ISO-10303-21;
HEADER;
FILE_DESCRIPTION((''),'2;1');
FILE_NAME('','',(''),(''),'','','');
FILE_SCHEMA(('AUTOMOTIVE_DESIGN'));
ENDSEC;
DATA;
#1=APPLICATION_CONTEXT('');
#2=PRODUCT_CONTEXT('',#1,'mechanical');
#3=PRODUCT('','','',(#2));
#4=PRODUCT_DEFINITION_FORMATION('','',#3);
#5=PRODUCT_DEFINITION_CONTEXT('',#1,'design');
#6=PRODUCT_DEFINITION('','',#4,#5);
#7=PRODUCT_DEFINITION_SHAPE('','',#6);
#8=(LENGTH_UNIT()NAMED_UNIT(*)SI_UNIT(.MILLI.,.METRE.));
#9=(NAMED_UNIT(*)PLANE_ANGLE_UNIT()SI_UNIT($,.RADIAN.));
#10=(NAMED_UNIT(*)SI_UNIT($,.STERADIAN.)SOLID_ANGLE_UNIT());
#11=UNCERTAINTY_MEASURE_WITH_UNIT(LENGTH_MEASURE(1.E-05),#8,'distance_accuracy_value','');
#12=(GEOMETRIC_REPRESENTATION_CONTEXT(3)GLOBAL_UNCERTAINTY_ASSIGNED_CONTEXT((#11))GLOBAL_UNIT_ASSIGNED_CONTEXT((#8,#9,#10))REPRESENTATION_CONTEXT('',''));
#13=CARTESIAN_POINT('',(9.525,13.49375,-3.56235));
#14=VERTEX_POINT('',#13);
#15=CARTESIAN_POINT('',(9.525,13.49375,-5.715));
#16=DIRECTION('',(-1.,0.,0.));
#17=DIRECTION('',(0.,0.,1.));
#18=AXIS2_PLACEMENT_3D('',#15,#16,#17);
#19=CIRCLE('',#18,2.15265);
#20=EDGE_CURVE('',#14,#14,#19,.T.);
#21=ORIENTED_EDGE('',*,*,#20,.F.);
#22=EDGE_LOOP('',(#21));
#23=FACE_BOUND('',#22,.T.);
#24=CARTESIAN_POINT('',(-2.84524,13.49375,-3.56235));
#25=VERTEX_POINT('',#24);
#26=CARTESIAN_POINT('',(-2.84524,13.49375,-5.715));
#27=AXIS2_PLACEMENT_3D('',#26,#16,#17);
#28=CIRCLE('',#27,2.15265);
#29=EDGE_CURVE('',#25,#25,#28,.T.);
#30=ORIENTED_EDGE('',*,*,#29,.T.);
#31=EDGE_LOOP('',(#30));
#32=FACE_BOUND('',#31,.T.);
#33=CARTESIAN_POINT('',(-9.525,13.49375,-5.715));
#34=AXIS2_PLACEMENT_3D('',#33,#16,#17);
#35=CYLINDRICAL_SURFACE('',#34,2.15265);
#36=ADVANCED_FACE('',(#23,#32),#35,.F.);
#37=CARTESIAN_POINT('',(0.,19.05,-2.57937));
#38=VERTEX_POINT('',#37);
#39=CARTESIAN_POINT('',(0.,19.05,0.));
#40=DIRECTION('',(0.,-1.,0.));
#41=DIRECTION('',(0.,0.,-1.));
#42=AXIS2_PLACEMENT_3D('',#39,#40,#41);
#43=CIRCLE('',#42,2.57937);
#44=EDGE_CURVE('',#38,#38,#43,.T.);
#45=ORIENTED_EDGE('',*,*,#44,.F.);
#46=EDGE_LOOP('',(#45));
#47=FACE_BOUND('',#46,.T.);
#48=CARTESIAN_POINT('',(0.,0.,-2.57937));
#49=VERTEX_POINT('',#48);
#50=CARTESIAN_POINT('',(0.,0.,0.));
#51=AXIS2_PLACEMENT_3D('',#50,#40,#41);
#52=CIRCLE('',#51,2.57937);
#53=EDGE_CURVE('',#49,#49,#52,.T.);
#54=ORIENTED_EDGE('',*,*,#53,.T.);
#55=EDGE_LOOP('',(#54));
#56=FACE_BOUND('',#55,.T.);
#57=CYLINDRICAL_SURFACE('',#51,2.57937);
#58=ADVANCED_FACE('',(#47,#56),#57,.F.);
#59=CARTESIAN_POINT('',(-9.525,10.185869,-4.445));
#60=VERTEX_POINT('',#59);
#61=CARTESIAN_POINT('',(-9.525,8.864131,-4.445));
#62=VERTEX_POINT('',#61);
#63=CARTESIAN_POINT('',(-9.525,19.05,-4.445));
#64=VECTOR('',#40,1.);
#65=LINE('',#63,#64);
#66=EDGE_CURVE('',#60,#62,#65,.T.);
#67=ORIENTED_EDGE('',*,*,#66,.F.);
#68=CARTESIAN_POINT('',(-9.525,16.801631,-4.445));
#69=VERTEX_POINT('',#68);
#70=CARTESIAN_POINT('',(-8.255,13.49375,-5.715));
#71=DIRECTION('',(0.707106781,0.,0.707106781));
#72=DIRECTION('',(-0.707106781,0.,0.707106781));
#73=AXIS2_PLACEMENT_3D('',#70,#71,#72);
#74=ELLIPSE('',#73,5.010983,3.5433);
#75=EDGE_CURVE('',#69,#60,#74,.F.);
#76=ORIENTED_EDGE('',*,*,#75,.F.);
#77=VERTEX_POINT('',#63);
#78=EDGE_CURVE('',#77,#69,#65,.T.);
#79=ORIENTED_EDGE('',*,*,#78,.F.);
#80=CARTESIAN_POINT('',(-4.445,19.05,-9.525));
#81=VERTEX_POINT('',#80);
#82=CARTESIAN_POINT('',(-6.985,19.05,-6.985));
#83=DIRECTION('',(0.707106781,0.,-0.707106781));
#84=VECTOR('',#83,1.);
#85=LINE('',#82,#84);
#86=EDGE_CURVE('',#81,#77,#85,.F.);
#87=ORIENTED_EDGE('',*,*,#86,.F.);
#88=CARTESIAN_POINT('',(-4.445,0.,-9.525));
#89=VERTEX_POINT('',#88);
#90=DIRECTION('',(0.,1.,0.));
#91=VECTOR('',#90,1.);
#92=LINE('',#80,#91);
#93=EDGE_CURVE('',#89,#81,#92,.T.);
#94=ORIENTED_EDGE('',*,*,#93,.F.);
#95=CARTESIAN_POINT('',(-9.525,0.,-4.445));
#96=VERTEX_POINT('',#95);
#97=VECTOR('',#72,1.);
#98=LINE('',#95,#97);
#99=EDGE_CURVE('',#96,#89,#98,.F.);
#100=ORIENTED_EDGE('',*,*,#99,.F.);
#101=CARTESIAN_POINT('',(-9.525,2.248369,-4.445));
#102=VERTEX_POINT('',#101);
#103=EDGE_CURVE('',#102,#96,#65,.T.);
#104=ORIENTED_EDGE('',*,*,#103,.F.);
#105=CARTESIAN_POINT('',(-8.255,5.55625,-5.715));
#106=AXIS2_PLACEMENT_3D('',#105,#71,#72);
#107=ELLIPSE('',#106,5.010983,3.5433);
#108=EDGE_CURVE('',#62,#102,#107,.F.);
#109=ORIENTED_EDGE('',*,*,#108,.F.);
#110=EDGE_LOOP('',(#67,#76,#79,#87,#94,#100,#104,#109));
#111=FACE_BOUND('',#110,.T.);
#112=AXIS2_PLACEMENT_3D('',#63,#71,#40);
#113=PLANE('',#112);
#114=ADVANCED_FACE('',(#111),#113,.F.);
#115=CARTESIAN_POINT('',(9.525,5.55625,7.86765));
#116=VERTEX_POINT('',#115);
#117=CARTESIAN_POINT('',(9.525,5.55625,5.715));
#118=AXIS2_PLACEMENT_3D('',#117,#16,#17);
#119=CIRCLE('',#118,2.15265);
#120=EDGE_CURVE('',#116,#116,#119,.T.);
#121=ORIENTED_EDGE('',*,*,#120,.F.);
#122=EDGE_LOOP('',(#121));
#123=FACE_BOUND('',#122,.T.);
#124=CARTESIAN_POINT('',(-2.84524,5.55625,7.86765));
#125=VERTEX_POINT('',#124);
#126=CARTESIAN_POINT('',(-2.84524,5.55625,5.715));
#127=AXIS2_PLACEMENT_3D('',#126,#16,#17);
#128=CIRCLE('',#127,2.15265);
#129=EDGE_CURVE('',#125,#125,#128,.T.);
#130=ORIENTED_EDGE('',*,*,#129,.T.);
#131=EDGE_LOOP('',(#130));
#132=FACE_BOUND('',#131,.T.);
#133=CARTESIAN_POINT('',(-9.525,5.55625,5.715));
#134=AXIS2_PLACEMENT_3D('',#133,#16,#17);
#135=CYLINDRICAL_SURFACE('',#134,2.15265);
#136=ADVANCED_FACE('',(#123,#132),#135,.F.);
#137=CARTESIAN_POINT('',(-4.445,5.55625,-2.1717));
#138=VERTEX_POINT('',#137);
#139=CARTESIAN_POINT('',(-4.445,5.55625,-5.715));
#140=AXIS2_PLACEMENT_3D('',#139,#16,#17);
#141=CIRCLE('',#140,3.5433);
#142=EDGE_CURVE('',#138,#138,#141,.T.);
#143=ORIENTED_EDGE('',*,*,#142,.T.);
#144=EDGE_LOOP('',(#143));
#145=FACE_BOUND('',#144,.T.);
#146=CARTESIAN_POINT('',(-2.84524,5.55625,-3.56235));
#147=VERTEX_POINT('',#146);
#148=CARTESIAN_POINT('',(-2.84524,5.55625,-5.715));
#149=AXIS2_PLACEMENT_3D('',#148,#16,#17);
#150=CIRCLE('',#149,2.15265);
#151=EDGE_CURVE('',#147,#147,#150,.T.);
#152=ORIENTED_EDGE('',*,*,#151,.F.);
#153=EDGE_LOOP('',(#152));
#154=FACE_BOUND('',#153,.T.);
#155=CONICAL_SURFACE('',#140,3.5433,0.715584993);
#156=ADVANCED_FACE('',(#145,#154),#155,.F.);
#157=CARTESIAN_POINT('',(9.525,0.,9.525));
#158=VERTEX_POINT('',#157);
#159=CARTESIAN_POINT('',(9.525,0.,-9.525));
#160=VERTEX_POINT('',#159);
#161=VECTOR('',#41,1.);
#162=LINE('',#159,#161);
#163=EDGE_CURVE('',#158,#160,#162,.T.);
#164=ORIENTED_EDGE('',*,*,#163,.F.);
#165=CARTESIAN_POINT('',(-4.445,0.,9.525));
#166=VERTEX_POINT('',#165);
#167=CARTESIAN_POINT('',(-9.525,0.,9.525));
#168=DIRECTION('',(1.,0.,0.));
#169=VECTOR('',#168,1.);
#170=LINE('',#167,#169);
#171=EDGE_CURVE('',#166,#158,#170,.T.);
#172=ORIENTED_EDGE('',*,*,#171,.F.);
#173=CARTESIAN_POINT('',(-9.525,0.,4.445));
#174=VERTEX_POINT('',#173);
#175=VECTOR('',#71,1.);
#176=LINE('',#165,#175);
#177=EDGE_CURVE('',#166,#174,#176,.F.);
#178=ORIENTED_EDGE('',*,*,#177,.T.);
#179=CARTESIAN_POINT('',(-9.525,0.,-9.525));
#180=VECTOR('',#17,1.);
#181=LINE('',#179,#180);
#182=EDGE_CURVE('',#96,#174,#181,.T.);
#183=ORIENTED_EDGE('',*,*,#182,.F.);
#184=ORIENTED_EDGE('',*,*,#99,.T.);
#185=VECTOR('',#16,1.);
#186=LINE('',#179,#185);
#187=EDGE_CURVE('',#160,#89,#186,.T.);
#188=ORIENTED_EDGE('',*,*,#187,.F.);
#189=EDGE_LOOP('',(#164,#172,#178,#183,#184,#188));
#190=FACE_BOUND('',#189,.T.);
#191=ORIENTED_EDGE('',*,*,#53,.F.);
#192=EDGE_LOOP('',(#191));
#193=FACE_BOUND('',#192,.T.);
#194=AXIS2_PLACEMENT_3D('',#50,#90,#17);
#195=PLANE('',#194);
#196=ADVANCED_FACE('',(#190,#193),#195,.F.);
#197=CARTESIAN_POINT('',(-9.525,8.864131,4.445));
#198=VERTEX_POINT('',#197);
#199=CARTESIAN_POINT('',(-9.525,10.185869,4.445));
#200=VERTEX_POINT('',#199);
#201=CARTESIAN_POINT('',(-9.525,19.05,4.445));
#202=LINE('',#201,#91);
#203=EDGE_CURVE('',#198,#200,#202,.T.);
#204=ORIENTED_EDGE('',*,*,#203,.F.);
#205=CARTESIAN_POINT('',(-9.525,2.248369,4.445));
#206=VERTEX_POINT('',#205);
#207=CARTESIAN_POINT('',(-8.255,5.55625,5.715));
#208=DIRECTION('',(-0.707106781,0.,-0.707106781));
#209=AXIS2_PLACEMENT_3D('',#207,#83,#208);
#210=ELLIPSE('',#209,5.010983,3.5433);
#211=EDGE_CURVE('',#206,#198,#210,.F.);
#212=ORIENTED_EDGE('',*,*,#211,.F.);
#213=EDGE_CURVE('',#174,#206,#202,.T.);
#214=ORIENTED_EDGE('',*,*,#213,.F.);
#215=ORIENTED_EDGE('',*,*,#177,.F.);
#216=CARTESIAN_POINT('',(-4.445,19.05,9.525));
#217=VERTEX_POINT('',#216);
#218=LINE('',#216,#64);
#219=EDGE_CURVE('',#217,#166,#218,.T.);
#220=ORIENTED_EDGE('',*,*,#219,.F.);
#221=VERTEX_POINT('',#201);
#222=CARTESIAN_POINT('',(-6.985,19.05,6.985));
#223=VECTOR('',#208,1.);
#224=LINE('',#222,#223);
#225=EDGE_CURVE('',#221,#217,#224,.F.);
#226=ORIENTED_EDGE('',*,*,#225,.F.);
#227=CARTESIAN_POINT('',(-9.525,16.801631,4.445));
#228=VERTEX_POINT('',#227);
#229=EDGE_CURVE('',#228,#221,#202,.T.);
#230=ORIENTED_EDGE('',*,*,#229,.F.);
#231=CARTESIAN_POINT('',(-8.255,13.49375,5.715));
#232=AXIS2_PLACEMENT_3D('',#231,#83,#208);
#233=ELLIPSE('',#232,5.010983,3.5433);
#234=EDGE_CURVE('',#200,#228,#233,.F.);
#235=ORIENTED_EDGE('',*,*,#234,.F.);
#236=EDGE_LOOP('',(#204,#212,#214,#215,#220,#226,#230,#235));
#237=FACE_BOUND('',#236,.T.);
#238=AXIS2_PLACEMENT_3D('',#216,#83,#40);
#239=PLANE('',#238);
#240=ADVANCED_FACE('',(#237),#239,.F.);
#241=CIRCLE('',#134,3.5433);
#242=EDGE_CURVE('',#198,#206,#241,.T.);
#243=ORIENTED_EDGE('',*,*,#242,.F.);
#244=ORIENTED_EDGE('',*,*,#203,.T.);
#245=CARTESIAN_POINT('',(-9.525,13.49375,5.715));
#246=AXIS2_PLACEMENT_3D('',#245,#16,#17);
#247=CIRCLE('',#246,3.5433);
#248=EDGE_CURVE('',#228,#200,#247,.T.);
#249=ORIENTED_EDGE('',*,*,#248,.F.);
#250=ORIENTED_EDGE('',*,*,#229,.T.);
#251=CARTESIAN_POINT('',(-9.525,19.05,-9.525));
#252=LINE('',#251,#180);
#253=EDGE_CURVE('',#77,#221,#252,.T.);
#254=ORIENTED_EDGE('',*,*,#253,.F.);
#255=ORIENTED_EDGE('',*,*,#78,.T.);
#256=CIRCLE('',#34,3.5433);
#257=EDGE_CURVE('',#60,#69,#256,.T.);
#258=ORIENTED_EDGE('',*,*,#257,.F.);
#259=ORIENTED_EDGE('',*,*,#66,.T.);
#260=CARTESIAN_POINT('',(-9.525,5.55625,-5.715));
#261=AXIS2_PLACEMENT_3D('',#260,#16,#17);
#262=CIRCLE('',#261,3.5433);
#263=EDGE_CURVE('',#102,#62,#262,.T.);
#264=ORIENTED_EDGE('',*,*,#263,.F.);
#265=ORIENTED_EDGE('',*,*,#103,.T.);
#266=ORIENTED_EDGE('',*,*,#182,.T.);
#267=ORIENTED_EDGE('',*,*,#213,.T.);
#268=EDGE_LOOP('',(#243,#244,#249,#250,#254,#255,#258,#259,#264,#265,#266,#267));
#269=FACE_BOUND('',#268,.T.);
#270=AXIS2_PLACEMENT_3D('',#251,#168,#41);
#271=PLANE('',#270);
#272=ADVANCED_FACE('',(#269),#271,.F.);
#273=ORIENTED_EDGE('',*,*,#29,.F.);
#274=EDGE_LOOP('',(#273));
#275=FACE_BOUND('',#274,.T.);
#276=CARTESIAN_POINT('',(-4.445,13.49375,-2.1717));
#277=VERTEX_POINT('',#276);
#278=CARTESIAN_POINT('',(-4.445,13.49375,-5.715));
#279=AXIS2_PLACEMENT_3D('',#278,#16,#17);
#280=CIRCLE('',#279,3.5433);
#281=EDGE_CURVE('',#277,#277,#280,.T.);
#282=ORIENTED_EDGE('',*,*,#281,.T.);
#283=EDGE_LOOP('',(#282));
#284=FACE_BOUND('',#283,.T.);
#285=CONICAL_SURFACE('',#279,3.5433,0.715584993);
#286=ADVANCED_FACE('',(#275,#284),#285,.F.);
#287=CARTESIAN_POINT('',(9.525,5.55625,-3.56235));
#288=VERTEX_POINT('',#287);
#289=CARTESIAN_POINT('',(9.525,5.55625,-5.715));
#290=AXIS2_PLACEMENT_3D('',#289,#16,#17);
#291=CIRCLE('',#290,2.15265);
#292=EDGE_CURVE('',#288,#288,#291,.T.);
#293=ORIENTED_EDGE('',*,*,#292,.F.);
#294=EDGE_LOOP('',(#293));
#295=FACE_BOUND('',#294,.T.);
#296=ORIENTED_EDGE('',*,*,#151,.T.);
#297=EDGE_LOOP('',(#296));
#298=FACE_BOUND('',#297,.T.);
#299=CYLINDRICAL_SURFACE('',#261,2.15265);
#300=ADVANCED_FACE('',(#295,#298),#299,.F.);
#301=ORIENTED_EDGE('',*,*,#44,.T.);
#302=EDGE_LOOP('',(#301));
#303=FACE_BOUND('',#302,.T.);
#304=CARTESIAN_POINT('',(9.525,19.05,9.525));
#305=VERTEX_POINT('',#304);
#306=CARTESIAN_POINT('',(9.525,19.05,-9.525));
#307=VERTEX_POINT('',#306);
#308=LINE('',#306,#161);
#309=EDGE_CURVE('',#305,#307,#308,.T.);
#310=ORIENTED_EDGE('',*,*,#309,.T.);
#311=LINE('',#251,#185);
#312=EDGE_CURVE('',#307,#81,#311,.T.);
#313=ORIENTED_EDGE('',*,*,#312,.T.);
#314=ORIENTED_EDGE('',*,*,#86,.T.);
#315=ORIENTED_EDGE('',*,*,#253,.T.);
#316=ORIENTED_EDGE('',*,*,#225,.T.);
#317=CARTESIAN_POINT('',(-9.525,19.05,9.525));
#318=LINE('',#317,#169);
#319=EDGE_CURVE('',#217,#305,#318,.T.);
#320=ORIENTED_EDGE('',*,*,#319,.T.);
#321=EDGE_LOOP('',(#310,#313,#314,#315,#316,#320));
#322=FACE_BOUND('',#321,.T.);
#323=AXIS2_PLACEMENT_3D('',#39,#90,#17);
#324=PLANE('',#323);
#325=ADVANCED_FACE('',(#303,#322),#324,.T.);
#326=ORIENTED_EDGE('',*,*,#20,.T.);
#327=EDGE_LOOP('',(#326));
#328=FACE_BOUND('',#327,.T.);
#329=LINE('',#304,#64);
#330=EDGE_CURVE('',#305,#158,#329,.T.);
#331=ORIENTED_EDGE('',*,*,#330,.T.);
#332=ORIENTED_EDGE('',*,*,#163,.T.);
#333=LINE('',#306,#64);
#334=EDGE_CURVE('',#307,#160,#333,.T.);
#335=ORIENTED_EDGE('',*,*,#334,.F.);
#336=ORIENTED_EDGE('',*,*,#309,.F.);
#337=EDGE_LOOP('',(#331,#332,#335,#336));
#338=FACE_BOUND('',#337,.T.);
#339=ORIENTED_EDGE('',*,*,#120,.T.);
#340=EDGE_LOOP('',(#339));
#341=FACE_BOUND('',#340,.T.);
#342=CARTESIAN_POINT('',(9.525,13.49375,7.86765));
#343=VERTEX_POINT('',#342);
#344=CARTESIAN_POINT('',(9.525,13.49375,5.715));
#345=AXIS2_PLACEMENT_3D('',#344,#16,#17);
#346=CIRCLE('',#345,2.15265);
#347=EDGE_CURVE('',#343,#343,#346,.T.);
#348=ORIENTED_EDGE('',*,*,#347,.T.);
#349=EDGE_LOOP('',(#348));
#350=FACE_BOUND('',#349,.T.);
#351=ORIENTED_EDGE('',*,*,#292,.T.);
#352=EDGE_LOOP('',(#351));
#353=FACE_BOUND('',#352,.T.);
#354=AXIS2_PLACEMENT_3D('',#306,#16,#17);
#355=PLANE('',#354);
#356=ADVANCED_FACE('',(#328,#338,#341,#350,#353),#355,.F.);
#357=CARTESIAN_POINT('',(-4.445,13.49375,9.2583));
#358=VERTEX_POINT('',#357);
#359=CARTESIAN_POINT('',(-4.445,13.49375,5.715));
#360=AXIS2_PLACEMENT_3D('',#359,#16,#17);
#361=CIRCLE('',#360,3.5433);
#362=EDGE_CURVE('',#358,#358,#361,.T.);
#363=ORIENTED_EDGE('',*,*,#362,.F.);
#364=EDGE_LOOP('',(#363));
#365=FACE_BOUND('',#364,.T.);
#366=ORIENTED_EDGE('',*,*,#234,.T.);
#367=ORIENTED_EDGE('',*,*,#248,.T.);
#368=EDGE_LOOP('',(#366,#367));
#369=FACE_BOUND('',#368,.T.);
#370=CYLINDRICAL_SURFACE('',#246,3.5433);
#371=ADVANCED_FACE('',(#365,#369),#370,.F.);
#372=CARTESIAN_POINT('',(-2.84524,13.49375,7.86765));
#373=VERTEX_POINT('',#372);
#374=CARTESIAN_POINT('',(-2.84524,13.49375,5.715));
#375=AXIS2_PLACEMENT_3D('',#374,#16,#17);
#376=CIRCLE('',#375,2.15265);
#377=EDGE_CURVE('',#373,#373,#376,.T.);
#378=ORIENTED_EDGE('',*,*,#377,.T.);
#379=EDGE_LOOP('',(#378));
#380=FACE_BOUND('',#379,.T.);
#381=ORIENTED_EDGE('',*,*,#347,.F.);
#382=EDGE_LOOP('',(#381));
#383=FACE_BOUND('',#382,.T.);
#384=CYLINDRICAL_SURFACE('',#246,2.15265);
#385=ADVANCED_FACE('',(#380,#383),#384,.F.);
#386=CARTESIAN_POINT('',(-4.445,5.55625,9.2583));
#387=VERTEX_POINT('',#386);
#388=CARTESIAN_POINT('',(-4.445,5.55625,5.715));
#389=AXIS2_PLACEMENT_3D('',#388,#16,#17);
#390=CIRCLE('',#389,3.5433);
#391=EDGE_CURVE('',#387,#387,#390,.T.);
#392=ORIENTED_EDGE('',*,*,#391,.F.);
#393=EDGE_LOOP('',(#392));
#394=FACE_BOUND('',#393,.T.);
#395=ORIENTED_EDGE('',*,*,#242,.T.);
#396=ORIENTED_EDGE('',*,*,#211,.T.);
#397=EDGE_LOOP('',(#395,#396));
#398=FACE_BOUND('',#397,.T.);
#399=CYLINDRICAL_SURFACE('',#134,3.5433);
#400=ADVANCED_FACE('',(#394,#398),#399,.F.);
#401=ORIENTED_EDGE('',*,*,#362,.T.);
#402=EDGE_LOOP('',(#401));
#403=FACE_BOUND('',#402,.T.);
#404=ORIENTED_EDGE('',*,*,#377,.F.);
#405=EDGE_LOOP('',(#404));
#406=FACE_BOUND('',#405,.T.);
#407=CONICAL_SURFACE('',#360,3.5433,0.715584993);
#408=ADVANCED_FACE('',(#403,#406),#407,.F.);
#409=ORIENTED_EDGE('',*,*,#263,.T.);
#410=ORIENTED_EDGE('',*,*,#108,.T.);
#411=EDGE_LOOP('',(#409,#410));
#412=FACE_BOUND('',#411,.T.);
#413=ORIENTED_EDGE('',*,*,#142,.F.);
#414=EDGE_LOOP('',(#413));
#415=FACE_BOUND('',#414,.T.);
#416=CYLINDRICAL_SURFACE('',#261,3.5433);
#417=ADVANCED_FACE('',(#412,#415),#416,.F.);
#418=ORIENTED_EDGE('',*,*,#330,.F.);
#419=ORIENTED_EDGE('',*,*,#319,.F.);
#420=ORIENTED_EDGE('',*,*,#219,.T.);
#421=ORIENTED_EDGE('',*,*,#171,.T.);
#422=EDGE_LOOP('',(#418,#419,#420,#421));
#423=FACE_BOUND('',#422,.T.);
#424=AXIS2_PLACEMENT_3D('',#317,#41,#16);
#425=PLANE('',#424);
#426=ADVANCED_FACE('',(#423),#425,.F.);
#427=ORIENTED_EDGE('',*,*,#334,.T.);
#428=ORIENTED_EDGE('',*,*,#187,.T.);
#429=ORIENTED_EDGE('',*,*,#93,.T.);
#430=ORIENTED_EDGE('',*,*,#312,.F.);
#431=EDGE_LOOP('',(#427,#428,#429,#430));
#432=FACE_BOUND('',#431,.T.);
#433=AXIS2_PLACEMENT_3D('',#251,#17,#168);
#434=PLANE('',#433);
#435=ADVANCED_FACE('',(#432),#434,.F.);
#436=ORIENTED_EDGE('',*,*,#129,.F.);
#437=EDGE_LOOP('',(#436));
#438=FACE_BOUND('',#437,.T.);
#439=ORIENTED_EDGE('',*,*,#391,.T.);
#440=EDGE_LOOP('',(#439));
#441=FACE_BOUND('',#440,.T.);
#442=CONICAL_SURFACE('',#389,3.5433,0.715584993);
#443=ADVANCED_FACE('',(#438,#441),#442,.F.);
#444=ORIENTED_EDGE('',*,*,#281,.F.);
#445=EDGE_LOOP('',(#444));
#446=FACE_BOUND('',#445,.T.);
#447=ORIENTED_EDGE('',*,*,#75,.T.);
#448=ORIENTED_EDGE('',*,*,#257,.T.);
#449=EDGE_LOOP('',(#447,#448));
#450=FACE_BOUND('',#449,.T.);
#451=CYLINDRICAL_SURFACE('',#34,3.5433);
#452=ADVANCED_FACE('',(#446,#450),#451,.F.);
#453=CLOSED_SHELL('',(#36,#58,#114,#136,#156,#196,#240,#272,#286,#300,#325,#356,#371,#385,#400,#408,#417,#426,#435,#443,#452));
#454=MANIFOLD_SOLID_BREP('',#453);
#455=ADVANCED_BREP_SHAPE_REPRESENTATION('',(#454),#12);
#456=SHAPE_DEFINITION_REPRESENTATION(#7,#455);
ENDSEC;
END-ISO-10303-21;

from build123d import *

# Parameters (mm, degrees)
SKETCH1_W                                     = 19.05
SKETCH1_H                                     = 19.05
BOSS_EXTRUDE1_DEPTH                           = 19.05
TAPPED_HOLE_FOR_10_24_HELICOIL1_D             = 5.15874
CSK_FOR_6_FLAT_HEAD_MACHINE_SCREW1_AT_2_COUNT = 2
CSK_FOR_6_FLAT_HEAD_MACHINE_SCREW1_AT_2_PITCH = 7.9375
CSK_FOR_6_FLAT_HEAD_MACHINE_SCREW1_AT_3_COUNT = 2
CSK_FOR_6_FLAT_HEAD_MACHINE_SCREW1_AT_3_PITCH = 13.915775446
CSK_FOR_6_FLAT_HEAD_MACHINE_SCREW1_AT_4_COUNT = 2
CSK_FOR_6_FLAT_HEAD_MACHINE_SCREW1_AT_4_PITCH = 11.43
CHAMFER2_SIZE                                 = 5.08


with BuildPart() as part:
    # Sketch1 → Boss-Extrude1 (new body)
    with BuildSketch(Plane(origin=(0, 0, 0), x_dir=(1, 0, 0), z_dir=(0, 1, 0))):
        Rectangle(SKETCH1_W, SKETCH1_H)
    extrude(amount=BOSS_EXTRUDE1_DEPTH)

    # Tapped Hole for #10-24 Helicoil1 (through all)
    with Locations(Plane.XZ):
        with Locations((0, 0)):
            Hole(TAPPED_HOLE_FOR_10_24_HELICOIL1_D / 2)

    # Sketch5 → CSK for #6 Flat Head Machine Screw1 (revolve, cut)
    with BuildSketch(Plane(origin=(-9.525, 5.55625, 5.715), x_dir=(0, 0, 1), z_dir=(0, 1, 0))):
        Polygon((0, 0), (0, 19.05), (2.15265, 19.05), (2.15265, 6.679759826), (3.5433, 5.08), (3.5433, 0), align=None)
    csk_for_6_flat_head_machine_screw1 = revolve(axis=Axis((-15.875, 5.55625, 5.715), (1, 0, 0)), mode=Mode.SUBTRACT)

    # CSK for #6 Flat Head Machine Screw1 at 2: CSK for #6 Flat Head Machine Screw1 ×2
    with Locations(*[(0, i * CSK_FOR_6_FLAT_HEAD_MACHINE_SCREW1_AT_2_PITCH, 0) for i in range(1, CSK_FOR_6_FLAT_HEAD_MACHINE_SCREW1_AT_2_COUNT)]):
        add(csk_for_6_flat_head_machine_screw1, mode=Mode.SUBTRACT)

    # CSK for #6 Flat Head Machine Screw1 at 3: CSK for #6 Flat Head Machine Screw1 ×2
    with Locations(*[Vector(0, 0.5703958094953442, -0.8213699656732957) * (i * CSK_FOR_6_FLAT_HEAD_MACHINE_SCREW1_AT_3_PITCH) for i in range(1, CSK_FOR_6_FLAT_HEAD_MACHINE_SCREW1_AT_3_COUNT)]):
        add(csk_for_6_flat_head_machine_screw1, mode=Mode.SUBTRACT)

    # CSK for #6 Flat Head Machine Screw1 at 4: CSK for #6 Flat Head Machine Screw1 ×2
    with Locations(*[(0, 0, -i * CSK_FOR_6_FLAT_HEAD_MACHINE_SCREW1_AT_4_PITCH) for i in range(1, CSK_FOR_6_FLAT_HEAD_MACHINE_SCREW1_AT_4_COUNT)]):
        add(csk_for_6_flat_head_machine_screw1, mode=Mode.SUBTRACT)

    # Chamfer2
    # the kernel refuses this chamfer: 5.08 mm, written as the material it takes off along each edge
    with BuildSketch(Plane(origin=(-9.525, -13.064149579, -9.525), x_dir=(0.9996219169112966, 0, -0.02749587661058626), z_dir=(0, 1, 0)), Plane(origin=(-9.525, -13.064149579, 9.525), x_dir=(-0.02749587661058626, 0, -0.9996219169112968), z_dir=(0, 1, 0))) as chamfer2_piece_1:
        Polygon((CHAMFER2_SIZE * 0.999621916911, -CHAMFER2_SIZE * 0.0274958766106), (-CHAMFER2_SIZE * 0.0274958766106, -CHAMFER2_SIZE * 0.999621916911), (0, 0), align=None)
    extrude(amount=45.178299158, mode=Mode.SUBTRACT)


solid = part.part
